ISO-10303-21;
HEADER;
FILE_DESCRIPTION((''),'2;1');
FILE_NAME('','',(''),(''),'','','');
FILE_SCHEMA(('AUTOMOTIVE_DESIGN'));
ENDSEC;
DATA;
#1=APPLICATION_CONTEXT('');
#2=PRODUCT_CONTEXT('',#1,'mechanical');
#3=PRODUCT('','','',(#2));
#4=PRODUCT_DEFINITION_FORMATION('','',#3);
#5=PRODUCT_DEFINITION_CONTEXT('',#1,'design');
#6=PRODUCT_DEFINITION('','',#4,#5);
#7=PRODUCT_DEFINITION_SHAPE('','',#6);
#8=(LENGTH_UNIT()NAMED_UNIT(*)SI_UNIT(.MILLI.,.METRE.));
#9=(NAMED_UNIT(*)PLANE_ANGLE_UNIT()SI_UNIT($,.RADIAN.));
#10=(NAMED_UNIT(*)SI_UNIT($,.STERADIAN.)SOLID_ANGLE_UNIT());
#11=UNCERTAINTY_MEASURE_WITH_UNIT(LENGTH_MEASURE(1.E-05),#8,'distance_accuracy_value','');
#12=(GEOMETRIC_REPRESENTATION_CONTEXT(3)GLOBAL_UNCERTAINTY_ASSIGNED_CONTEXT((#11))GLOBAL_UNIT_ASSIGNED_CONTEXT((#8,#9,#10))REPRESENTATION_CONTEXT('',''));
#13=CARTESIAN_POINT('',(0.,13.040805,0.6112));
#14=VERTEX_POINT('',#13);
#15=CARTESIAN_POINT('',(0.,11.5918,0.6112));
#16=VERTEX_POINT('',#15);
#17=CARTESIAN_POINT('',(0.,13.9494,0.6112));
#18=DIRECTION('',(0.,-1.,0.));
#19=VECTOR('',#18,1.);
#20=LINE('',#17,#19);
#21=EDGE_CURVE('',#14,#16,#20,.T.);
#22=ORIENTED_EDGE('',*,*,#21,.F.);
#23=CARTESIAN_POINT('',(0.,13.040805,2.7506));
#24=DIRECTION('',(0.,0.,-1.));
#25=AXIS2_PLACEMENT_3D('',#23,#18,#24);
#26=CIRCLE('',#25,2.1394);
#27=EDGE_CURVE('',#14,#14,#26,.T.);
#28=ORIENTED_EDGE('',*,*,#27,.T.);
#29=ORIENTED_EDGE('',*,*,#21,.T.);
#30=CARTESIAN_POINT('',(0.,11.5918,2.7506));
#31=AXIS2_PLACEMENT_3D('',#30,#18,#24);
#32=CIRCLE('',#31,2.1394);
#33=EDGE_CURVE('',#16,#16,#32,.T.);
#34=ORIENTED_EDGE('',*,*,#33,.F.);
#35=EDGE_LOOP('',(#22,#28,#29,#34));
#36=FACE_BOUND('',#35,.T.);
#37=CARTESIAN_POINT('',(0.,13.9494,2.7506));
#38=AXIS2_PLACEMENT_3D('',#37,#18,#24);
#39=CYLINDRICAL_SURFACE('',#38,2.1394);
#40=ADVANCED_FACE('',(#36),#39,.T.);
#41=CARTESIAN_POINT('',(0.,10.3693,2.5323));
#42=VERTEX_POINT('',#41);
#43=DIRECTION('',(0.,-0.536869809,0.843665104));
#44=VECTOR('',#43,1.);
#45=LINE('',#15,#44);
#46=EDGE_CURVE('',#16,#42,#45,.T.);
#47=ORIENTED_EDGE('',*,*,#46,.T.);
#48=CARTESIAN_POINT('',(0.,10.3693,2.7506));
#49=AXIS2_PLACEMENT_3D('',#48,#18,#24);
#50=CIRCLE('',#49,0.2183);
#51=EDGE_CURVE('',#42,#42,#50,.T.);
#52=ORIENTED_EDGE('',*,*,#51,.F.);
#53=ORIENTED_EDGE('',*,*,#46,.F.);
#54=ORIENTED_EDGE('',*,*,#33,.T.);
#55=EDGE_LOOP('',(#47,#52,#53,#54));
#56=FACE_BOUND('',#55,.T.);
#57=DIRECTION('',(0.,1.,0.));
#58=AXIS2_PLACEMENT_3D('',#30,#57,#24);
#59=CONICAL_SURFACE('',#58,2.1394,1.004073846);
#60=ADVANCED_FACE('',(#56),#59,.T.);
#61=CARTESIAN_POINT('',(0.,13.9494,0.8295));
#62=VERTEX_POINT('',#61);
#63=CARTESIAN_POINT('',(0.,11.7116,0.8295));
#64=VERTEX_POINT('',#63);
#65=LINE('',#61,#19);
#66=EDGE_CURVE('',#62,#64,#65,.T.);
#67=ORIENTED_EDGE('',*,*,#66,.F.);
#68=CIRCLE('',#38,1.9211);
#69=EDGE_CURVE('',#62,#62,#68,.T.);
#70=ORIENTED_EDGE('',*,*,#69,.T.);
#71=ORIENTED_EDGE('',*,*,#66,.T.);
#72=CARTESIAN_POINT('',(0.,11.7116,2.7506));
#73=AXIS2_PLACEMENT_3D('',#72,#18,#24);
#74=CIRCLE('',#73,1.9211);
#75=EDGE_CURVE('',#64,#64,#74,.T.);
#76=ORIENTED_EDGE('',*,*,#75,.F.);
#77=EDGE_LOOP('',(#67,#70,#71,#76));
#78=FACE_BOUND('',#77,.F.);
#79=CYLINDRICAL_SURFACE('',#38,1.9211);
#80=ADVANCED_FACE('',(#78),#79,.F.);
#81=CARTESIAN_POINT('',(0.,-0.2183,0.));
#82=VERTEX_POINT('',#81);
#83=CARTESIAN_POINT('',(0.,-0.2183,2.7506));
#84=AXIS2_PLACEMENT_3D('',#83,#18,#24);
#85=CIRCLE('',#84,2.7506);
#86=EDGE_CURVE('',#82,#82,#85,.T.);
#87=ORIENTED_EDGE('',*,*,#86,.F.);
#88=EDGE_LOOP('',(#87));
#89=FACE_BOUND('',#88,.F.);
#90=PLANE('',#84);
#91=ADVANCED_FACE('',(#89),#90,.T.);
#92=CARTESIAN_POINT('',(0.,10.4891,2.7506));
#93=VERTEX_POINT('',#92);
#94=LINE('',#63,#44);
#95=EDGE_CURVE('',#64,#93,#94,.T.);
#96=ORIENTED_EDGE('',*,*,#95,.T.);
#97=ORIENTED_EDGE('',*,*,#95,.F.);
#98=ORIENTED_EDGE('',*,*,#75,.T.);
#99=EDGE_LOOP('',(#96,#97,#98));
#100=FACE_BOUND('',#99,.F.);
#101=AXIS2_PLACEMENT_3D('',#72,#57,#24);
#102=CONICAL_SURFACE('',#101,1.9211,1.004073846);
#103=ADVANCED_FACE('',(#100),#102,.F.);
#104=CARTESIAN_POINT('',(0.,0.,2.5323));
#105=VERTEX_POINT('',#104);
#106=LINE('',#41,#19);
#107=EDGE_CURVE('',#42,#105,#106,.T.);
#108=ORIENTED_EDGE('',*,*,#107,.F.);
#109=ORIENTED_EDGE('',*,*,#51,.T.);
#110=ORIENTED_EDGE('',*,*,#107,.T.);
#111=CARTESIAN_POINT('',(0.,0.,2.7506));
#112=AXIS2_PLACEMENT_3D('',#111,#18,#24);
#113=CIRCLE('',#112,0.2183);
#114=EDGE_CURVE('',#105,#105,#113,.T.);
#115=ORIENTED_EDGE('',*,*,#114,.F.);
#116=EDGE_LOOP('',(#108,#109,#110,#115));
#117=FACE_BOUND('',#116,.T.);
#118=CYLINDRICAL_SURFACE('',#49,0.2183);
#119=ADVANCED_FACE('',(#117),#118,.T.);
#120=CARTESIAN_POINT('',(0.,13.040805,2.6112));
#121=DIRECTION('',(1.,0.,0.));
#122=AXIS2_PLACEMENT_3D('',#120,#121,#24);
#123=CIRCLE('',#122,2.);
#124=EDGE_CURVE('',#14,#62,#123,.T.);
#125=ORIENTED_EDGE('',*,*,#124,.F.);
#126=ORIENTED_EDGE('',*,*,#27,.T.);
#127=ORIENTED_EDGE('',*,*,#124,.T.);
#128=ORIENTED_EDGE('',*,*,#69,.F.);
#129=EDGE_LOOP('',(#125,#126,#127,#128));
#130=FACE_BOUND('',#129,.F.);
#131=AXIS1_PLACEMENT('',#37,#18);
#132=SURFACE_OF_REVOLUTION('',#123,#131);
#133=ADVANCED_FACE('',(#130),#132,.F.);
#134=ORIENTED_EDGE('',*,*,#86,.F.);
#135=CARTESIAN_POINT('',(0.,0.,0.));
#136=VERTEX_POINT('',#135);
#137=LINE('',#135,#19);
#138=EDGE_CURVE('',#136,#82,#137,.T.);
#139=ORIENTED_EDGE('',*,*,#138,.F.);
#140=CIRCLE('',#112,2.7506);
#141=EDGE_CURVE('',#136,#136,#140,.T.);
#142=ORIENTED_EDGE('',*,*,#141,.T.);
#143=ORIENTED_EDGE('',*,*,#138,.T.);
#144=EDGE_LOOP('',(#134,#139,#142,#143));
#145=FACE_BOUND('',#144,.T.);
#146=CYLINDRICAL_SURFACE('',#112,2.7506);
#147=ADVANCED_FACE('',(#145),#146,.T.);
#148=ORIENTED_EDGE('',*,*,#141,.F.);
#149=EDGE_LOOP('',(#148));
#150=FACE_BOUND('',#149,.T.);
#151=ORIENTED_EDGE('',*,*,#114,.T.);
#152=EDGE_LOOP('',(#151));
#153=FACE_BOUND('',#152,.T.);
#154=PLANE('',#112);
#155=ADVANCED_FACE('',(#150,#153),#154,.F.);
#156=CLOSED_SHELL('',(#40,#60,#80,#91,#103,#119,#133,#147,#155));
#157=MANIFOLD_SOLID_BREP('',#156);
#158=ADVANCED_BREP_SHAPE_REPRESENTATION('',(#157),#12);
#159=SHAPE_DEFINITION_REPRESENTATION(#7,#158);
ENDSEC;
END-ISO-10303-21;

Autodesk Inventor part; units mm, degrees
ref_plane "YZ Plane" through (0, 0, 0) normal (1, 0, 0) x (0, 1, 0)
ref_plane "XZ Plane" through (0, 0, 0) normal (0, 1, 0) x (-1, 0, 0)
ref_plane "XY Plane" through (0, 0, 0) normal (0, 0, 1) x (1, 0, 0)
sketch "Sketch1" plane through (0, 0, 0) normal (1, 0, 0) x (0, 1, 0)
  line L0 (13.9494, 0.6112) -> (11.5918, 0.6112)
  line L1 (11.5918, 0.6112) -> (10.3693, 2.5323)
  line L2 (10.3693, 2.5323) -> (0, 2.5323)
  line L3 (0, 2.5323) -> (0, 0)
  line L4 (13.9494, 0.8295) -> (11.7116, 0.8295)
  line L5 (11.7116, 0.8295) -> (10.4891, 2.7506)
  line L6 (10.4891, 2.7506) -> (-0.2183, 2.7506)
  line L7 (-0.2183, 2.7506) -> (-0.2183, 0)
  line L8 (13.9494, 0.8295) -> (13.9494, 0.6112)
  line L9 (0, 0) -> (-0.2183, 0)
revolve "Revolution1" add sketch "Sketch1" angle 360 about axis through (0, 10.4891, 2.7506) along (0, -1, 0)
fillet "Fillet1" radius 2 1 edges at (0, 13.9494, 4.8899)
properties part number "Magic 3D Sketch" material "UHMW, Black"
